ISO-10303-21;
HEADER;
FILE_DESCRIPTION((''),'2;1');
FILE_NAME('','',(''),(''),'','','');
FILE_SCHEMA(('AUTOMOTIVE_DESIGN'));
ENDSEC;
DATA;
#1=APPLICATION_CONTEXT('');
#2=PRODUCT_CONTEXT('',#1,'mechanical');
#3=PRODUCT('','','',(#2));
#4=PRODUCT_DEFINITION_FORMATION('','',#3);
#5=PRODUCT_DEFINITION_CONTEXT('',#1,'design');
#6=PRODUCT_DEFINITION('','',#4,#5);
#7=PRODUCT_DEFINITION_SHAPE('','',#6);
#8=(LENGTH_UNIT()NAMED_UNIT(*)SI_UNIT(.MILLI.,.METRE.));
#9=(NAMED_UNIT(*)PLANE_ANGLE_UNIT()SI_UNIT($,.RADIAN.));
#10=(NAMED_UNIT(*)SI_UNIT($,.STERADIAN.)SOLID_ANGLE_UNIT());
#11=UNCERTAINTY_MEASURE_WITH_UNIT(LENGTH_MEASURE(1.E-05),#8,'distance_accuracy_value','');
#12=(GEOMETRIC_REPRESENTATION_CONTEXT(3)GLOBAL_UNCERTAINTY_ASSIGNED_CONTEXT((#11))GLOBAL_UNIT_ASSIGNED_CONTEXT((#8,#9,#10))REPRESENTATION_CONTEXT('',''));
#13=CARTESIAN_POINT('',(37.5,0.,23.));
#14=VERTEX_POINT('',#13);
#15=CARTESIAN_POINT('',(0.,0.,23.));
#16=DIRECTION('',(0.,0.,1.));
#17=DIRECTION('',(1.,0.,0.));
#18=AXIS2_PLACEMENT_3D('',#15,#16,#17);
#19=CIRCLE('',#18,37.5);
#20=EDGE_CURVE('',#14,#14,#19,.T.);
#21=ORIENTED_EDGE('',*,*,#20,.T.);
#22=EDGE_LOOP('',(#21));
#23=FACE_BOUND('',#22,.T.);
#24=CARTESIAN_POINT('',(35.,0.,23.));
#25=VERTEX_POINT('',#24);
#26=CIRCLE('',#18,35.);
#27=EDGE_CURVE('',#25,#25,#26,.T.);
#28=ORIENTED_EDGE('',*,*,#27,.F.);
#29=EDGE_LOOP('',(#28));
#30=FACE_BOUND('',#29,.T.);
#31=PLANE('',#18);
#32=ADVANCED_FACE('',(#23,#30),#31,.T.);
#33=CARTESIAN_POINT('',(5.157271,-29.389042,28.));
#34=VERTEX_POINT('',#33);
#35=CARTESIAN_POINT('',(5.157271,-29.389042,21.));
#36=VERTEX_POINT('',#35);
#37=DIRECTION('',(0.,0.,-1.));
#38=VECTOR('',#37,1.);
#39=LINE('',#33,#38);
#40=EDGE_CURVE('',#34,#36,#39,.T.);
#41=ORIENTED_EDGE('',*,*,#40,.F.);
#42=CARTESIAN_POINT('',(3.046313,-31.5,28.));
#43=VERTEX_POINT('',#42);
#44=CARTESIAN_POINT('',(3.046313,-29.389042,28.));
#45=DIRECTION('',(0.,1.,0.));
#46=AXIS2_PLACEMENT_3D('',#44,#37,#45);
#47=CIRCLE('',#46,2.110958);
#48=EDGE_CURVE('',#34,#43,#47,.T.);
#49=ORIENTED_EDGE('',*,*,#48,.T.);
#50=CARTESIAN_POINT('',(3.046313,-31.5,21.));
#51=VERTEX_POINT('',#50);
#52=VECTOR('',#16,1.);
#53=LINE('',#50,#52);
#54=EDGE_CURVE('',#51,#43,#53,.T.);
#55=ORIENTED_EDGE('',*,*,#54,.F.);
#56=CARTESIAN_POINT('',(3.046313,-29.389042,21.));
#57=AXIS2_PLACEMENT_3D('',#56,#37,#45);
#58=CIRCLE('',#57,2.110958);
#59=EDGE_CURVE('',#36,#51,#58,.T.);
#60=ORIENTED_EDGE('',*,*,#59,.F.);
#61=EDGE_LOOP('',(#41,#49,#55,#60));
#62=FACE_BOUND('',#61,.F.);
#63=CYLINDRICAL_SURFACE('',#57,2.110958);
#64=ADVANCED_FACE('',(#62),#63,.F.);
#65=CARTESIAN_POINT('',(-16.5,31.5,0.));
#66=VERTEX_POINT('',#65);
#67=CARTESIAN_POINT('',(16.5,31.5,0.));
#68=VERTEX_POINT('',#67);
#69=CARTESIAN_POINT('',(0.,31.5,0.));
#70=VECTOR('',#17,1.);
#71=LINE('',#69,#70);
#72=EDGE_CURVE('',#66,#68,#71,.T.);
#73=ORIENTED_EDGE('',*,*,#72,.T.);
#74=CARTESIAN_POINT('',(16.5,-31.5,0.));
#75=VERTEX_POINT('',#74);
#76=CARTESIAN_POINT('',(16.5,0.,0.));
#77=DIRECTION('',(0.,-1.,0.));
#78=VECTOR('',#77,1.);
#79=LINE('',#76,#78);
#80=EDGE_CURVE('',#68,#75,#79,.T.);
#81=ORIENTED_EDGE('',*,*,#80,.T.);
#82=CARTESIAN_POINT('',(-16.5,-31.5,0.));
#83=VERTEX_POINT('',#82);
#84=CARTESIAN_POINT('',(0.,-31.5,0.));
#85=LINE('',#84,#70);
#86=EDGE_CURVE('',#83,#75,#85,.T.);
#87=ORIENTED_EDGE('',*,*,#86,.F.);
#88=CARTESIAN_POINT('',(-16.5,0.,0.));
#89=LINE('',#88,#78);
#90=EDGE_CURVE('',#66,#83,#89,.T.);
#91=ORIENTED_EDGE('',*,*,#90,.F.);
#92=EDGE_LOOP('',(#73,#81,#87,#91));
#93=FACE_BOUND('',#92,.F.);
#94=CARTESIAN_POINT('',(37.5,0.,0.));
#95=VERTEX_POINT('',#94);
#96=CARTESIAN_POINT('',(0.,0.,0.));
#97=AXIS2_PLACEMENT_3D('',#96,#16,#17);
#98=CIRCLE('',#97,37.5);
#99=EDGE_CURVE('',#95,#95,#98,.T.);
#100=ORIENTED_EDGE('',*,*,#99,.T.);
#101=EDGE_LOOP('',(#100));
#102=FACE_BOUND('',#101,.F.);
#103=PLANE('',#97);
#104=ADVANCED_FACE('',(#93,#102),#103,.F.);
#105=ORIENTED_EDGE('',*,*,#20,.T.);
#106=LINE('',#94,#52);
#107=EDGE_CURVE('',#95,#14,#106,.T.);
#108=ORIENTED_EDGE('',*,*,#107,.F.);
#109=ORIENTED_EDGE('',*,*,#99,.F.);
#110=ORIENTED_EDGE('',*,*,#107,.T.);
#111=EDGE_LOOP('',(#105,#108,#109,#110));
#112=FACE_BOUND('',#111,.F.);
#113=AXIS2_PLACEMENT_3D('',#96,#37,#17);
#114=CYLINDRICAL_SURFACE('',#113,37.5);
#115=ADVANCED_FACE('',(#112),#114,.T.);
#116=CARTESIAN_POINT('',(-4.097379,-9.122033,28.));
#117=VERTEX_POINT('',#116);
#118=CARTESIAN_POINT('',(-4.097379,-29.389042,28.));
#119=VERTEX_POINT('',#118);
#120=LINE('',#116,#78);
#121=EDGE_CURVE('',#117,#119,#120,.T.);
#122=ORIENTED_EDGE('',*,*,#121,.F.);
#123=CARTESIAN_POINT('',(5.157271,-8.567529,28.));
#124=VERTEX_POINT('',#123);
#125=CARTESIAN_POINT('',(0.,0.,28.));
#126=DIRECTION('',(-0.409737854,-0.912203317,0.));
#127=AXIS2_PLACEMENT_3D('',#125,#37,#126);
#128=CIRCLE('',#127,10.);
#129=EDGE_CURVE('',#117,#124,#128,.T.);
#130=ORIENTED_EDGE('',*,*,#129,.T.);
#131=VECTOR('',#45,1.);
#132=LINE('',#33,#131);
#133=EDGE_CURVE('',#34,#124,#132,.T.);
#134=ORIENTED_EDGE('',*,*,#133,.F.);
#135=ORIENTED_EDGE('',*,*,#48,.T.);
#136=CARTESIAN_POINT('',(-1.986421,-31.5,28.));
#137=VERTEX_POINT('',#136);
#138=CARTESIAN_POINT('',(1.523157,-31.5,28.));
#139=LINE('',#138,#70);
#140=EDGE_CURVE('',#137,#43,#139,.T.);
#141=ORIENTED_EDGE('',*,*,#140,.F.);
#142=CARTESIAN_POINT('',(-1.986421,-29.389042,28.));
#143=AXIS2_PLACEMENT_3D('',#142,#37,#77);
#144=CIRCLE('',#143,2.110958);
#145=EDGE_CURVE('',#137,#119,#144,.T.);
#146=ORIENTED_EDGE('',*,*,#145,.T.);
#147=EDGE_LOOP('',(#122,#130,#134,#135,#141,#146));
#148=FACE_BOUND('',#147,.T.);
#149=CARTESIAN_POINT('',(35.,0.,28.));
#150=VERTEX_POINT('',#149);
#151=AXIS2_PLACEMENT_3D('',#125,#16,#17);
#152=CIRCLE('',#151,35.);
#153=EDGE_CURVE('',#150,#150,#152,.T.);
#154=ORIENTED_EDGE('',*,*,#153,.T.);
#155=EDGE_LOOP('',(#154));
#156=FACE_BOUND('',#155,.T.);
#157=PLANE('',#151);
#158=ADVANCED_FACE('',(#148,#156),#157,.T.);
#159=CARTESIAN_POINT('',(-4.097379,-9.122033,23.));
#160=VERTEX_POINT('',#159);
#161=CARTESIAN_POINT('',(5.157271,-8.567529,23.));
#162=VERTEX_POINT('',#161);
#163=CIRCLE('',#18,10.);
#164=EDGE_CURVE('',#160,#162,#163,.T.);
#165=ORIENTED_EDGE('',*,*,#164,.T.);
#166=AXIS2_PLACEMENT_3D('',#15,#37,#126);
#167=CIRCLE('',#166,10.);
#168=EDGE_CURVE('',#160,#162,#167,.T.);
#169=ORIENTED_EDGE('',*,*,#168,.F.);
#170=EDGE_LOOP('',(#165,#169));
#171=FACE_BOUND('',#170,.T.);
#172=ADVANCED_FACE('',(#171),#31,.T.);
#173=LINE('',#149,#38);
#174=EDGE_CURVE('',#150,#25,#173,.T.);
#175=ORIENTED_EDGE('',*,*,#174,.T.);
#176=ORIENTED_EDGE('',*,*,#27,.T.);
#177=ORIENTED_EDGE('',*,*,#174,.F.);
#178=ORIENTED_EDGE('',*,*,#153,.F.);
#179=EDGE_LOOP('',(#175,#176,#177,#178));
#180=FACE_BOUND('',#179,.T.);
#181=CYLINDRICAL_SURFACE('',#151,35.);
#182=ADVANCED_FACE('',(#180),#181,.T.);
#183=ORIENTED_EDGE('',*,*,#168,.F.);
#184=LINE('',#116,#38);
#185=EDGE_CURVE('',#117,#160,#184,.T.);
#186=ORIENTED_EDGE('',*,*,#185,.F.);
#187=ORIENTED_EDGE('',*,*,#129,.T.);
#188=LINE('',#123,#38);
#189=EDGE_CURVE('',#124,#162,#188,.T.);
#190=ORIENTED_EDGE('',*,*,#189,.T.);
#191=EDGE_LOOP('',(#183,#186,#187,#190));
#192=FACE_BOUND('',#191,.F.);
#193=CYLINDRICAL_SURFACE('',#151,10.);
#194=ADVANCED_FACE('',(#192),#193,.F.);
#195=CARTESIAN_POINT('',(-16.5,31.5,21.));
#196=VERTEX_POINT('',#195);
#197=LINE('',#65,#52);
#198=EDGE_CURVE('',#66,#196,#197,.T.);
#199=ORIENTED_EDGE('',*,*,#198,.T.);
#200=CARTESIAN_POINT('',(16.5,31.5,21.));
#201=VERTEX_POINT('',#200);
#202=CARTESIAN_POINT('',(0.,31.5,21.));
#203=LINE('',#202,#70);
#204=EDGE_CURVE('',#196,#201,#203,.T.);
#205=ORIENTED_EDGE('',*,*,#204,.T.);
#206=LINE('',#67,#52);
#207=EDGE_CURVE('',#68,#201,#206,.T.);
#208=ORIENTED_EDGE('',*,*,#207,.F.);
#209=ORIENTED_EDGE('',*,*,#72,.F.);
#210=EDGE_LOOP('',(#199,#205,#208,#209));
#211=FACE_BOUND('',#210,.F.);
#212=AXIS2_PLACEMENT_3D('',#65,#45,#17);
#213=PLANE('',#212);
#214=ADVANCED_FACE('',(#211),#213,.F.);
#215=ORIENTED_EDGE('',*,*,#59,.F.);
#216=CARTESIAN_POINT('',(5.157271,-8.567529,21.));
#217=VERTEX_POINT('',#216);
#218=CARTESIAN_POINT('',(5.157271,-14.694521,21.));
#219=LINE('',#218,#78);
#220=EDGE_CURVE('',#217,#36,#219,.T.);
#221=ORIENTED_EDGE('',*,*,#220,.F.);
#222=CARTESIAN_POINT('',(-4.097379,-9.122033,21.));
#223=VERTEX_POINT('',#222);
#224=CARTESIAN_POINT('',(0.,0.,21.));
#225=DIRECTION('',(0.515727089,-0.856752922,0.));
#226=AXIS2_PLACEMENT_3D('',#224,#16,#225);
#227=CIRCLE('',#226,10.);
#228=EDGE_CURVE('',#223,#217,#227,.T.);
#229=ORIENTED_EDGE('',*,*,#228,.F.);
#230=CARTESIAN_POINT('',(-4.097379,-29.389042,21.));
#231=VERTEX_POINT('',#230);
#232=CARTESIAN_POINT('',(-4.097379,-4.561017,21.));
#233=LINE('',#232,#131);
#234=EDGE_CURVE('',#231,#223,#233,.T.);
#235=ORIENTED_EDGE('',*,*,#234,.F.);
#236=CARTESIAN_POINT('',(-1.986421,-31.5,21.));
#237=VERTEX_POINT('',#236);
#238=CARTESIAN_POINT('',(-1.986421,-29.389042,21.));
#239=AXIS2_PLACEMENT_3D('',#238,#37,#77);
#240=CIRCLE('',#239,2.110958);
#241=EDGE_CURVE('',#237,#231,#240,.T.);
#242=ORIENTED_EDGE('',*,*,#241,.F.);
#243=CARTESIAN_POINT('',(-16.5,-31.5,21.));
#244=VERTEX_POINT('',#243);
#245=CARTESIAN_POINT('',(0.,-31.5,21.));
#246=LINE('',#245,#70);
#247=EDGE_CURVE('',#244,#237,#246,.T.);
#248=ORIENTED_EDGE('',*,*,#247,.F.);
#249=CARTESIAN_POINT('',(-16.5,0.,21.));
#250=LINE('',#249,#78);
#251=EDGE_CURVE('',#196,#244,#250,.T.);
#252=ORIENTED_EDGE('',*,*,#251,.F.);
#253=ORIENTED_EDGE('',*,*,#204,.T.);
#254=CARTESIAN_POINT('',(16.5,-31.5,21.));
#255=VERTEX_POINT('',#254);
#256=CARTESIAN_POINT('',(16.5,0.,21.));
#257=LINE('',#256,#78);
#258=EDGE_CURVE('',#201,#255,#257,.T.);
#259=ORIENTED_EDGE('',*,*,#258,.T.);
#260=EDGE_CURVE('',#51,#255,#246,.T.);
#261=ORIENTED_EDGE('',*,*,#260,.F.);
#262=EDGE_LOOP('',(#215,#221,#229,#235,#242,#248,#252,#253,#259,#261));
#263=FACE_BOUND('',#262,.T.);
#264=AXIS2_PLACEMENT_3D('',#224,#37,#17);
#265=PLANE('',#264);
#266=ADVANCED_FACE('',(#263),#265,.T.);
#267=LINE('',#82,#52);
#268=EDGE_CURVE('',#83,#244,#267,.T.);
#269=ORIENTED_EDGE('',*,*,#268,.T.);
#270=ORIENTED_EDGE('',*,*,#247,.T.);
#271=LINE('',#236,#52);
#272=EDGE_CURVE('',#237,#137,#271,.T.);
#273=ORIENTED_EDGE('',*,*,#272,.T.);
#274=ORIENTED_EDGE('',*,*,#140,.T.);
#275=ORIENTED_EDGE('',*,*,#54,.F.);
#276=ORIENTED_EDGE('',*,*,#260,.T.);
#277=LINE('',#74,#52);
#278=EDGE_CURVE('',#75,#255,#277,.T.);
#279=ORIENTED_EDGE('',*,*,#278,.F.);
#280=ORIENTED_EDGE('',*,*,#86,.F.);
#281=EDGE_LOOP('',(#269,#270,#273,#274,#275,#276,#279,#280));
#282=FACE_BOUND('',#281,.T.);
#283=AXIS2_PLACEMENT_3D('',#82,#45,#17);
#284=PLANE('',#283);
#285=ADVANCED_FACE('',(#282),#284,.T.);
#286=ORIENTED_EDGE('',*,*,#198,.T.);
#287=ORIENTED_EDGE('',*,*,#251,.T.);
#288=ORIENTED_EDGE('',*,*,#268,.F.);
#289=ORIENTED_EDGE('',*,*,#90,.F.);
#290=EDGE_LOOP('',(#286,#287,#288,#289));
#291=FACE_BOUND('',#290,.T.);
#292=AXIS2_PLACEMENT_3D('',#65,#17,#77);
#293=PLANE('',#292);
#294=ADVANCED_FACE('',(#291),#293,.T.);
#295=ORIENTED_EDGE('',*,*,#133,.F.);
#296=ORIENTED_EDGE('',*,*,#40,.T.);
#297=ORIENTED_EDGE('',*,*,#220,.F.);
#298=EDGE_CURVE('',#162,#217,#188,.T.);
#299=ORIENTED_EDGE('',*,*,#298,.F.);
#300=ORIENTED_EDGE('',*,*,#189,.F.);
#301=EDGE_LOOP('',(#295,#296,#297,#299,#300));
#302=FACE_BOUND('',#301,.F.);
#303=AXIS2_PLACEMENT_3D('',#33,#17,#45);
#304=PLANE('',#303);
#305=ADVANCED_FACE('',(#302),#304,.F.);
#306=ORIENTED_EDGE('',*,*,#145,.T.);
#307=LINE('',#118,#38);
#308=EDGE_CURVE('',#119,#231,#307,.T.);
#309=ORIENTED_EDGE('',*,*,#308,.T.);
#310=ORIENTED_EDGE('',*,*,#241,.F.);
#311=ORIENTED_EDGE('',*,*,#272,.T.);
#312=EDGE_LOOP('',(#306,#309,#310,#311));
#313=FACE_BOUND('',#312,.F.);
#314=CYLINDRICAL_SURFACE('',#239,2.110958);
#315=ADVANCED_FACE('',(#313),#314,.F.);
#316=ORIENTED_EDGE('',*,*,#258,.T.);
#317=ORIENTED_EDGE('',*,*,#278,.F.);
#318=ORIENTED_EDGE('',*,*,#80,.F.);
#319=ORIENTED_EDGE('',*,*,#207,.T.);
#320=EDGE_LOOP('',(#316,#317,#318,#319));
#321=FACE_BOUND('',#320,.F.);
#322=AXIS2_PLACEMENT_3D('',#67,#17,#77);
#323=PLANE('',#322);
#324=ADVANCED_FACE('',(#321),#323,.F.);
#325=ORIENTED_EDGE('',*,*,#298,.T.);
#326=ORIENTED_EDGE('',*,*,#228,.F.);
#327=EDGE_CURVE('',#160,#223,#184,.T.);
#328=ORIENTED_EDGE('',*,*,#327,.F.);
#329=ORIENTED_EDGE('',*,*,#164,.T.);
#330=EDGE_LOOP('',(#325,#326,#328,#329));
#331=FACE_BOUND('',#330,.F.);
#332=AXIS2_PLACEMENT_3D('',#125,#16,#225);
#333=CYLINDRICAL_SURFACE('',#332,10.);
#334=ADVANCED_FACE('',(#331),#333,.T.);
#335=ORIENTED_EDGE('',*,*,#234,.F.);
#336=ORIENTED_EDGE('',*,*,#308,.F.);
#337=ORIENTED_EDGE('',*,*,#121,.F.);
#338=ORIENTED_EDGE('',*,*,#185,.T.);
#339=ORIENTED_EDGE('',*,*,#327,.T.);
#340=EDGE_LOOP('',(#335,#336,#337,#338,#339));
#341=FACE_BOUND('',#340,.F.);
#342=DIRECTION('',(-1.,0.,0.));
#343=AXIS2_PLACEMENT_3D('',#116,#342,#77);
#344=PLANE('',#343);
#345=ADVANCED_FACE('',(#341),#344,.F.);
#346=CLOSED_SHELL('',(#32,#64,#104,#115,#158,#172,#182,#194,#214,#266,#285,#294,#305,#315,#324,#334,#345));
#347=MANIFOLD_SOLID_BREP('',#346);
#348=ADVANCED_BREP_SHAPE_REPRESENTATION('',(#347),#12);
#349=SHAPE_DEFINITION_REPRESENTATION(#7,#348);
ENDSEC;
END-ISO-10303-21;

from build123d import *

# Parameters (mm, degrees)
F0_R      = 37.5
F1_DEPTH  = 28
F2_W      = 33
F2_H      = 63
F3_DEPTH  = 21
F4_R      = 10
F5_DEPTH  = 5
F7_DEPTH  = 25
F9_DEPTH  = 15
F10_R     = 37.5
F10_R_2   = 35
F11_DEPTH = 5


with BuildPart() as f1:
    # F0 (on Top) → F1 (new body)
    with BuildSketch(Plane.XY):
        Circle(F0_R)
    extrude(amount=F1_DEPTH)

    # F2 (on face) → F3 (cut)
    with BuildSketch(Plane(origin=(0, 0, 0), x_dir=(1, 0, 0), z_dir=(0, 0, -1))):
        Rectangle(F2_W, F2_H)
    extrude(amount=-F3_DEPTH, mode=Mode.SUBTRACT)

    # F4 (on face) → F5 (cut)
    with BuildSketch(Plane.XY.offset(28)):
        Circle(F4_R)
    extrude(amount=-F5_DEPTH, mode=Mode.SUBTRACT)

    # F6 (on face) → F7 (cut)
    with BuildSketch(Plane(origin=(0, 0, 21), x_dir=(1, 0, 0), z_dir=(0, 0, -1))):
        with BuildLine():
            Line((3.0463133007, 31.5), (-1.9864209462, 31.5))
            ThreePointArc((-1.9864209462, 31.5), (-4.0973785389, 29.3890424073), (-1.9864209462, 27.2780848145))
            Line((-1.9864209462, 27.2780848145), (3.0463133007, 27.2780848145))
            ThreePointArc((3.0463133007, 27.2780848145), (5.1572708935, 29.3890424073), (3.0463133007, 31.5))
        make_face()
    extrude(amount=-F7_DEPTH, mode=Mode.SUBTRACT)

    # F8 (on face) → F9 (cut)
    with BuildSketch(Plane.XY.offset(28)):
        with BuildLine():
            Line((-4.0973785389, -9.1220331675), (-4.0973785389, -29.3890424073))
            ThreePointArc((-4.0973785389, -29.3890424073), (-3.4790933748, -27.8963699787), (-1.9864209462, -27.2780848145))
            Line((-1.9864209462, -27.2780848145), (3.0463133007, -27.2780848145))
            ThreePointArc((3.0463133007, -27.2780848145), (4.5389857293, -27.8963699787), (5.1572708935, -29.3890424073))
            Line((5.1572708935, -29.3890424073), (5.1572708935, -8.5675292198))
            ThreePointArc((5.1572708935, -8.5675292198), (0.5980899663, -9.9820983962), (-4.0973785389, -9.1220331675))
        make_face()
    extrude(amount=-F9_DEPTH, mode=Mode.SUBTRACT)

    # F10 (on face) → F11 (cut)
    with BuildSketch(Plane.XY.offset(28)):
        Circle(F10_R)
        Circle(F10_R_2, mode=Mode.SUBTRACT)
    extrude(amount=-F11_DEPTH, mode=Mode.SUBTRACT)


solid = f1.part
